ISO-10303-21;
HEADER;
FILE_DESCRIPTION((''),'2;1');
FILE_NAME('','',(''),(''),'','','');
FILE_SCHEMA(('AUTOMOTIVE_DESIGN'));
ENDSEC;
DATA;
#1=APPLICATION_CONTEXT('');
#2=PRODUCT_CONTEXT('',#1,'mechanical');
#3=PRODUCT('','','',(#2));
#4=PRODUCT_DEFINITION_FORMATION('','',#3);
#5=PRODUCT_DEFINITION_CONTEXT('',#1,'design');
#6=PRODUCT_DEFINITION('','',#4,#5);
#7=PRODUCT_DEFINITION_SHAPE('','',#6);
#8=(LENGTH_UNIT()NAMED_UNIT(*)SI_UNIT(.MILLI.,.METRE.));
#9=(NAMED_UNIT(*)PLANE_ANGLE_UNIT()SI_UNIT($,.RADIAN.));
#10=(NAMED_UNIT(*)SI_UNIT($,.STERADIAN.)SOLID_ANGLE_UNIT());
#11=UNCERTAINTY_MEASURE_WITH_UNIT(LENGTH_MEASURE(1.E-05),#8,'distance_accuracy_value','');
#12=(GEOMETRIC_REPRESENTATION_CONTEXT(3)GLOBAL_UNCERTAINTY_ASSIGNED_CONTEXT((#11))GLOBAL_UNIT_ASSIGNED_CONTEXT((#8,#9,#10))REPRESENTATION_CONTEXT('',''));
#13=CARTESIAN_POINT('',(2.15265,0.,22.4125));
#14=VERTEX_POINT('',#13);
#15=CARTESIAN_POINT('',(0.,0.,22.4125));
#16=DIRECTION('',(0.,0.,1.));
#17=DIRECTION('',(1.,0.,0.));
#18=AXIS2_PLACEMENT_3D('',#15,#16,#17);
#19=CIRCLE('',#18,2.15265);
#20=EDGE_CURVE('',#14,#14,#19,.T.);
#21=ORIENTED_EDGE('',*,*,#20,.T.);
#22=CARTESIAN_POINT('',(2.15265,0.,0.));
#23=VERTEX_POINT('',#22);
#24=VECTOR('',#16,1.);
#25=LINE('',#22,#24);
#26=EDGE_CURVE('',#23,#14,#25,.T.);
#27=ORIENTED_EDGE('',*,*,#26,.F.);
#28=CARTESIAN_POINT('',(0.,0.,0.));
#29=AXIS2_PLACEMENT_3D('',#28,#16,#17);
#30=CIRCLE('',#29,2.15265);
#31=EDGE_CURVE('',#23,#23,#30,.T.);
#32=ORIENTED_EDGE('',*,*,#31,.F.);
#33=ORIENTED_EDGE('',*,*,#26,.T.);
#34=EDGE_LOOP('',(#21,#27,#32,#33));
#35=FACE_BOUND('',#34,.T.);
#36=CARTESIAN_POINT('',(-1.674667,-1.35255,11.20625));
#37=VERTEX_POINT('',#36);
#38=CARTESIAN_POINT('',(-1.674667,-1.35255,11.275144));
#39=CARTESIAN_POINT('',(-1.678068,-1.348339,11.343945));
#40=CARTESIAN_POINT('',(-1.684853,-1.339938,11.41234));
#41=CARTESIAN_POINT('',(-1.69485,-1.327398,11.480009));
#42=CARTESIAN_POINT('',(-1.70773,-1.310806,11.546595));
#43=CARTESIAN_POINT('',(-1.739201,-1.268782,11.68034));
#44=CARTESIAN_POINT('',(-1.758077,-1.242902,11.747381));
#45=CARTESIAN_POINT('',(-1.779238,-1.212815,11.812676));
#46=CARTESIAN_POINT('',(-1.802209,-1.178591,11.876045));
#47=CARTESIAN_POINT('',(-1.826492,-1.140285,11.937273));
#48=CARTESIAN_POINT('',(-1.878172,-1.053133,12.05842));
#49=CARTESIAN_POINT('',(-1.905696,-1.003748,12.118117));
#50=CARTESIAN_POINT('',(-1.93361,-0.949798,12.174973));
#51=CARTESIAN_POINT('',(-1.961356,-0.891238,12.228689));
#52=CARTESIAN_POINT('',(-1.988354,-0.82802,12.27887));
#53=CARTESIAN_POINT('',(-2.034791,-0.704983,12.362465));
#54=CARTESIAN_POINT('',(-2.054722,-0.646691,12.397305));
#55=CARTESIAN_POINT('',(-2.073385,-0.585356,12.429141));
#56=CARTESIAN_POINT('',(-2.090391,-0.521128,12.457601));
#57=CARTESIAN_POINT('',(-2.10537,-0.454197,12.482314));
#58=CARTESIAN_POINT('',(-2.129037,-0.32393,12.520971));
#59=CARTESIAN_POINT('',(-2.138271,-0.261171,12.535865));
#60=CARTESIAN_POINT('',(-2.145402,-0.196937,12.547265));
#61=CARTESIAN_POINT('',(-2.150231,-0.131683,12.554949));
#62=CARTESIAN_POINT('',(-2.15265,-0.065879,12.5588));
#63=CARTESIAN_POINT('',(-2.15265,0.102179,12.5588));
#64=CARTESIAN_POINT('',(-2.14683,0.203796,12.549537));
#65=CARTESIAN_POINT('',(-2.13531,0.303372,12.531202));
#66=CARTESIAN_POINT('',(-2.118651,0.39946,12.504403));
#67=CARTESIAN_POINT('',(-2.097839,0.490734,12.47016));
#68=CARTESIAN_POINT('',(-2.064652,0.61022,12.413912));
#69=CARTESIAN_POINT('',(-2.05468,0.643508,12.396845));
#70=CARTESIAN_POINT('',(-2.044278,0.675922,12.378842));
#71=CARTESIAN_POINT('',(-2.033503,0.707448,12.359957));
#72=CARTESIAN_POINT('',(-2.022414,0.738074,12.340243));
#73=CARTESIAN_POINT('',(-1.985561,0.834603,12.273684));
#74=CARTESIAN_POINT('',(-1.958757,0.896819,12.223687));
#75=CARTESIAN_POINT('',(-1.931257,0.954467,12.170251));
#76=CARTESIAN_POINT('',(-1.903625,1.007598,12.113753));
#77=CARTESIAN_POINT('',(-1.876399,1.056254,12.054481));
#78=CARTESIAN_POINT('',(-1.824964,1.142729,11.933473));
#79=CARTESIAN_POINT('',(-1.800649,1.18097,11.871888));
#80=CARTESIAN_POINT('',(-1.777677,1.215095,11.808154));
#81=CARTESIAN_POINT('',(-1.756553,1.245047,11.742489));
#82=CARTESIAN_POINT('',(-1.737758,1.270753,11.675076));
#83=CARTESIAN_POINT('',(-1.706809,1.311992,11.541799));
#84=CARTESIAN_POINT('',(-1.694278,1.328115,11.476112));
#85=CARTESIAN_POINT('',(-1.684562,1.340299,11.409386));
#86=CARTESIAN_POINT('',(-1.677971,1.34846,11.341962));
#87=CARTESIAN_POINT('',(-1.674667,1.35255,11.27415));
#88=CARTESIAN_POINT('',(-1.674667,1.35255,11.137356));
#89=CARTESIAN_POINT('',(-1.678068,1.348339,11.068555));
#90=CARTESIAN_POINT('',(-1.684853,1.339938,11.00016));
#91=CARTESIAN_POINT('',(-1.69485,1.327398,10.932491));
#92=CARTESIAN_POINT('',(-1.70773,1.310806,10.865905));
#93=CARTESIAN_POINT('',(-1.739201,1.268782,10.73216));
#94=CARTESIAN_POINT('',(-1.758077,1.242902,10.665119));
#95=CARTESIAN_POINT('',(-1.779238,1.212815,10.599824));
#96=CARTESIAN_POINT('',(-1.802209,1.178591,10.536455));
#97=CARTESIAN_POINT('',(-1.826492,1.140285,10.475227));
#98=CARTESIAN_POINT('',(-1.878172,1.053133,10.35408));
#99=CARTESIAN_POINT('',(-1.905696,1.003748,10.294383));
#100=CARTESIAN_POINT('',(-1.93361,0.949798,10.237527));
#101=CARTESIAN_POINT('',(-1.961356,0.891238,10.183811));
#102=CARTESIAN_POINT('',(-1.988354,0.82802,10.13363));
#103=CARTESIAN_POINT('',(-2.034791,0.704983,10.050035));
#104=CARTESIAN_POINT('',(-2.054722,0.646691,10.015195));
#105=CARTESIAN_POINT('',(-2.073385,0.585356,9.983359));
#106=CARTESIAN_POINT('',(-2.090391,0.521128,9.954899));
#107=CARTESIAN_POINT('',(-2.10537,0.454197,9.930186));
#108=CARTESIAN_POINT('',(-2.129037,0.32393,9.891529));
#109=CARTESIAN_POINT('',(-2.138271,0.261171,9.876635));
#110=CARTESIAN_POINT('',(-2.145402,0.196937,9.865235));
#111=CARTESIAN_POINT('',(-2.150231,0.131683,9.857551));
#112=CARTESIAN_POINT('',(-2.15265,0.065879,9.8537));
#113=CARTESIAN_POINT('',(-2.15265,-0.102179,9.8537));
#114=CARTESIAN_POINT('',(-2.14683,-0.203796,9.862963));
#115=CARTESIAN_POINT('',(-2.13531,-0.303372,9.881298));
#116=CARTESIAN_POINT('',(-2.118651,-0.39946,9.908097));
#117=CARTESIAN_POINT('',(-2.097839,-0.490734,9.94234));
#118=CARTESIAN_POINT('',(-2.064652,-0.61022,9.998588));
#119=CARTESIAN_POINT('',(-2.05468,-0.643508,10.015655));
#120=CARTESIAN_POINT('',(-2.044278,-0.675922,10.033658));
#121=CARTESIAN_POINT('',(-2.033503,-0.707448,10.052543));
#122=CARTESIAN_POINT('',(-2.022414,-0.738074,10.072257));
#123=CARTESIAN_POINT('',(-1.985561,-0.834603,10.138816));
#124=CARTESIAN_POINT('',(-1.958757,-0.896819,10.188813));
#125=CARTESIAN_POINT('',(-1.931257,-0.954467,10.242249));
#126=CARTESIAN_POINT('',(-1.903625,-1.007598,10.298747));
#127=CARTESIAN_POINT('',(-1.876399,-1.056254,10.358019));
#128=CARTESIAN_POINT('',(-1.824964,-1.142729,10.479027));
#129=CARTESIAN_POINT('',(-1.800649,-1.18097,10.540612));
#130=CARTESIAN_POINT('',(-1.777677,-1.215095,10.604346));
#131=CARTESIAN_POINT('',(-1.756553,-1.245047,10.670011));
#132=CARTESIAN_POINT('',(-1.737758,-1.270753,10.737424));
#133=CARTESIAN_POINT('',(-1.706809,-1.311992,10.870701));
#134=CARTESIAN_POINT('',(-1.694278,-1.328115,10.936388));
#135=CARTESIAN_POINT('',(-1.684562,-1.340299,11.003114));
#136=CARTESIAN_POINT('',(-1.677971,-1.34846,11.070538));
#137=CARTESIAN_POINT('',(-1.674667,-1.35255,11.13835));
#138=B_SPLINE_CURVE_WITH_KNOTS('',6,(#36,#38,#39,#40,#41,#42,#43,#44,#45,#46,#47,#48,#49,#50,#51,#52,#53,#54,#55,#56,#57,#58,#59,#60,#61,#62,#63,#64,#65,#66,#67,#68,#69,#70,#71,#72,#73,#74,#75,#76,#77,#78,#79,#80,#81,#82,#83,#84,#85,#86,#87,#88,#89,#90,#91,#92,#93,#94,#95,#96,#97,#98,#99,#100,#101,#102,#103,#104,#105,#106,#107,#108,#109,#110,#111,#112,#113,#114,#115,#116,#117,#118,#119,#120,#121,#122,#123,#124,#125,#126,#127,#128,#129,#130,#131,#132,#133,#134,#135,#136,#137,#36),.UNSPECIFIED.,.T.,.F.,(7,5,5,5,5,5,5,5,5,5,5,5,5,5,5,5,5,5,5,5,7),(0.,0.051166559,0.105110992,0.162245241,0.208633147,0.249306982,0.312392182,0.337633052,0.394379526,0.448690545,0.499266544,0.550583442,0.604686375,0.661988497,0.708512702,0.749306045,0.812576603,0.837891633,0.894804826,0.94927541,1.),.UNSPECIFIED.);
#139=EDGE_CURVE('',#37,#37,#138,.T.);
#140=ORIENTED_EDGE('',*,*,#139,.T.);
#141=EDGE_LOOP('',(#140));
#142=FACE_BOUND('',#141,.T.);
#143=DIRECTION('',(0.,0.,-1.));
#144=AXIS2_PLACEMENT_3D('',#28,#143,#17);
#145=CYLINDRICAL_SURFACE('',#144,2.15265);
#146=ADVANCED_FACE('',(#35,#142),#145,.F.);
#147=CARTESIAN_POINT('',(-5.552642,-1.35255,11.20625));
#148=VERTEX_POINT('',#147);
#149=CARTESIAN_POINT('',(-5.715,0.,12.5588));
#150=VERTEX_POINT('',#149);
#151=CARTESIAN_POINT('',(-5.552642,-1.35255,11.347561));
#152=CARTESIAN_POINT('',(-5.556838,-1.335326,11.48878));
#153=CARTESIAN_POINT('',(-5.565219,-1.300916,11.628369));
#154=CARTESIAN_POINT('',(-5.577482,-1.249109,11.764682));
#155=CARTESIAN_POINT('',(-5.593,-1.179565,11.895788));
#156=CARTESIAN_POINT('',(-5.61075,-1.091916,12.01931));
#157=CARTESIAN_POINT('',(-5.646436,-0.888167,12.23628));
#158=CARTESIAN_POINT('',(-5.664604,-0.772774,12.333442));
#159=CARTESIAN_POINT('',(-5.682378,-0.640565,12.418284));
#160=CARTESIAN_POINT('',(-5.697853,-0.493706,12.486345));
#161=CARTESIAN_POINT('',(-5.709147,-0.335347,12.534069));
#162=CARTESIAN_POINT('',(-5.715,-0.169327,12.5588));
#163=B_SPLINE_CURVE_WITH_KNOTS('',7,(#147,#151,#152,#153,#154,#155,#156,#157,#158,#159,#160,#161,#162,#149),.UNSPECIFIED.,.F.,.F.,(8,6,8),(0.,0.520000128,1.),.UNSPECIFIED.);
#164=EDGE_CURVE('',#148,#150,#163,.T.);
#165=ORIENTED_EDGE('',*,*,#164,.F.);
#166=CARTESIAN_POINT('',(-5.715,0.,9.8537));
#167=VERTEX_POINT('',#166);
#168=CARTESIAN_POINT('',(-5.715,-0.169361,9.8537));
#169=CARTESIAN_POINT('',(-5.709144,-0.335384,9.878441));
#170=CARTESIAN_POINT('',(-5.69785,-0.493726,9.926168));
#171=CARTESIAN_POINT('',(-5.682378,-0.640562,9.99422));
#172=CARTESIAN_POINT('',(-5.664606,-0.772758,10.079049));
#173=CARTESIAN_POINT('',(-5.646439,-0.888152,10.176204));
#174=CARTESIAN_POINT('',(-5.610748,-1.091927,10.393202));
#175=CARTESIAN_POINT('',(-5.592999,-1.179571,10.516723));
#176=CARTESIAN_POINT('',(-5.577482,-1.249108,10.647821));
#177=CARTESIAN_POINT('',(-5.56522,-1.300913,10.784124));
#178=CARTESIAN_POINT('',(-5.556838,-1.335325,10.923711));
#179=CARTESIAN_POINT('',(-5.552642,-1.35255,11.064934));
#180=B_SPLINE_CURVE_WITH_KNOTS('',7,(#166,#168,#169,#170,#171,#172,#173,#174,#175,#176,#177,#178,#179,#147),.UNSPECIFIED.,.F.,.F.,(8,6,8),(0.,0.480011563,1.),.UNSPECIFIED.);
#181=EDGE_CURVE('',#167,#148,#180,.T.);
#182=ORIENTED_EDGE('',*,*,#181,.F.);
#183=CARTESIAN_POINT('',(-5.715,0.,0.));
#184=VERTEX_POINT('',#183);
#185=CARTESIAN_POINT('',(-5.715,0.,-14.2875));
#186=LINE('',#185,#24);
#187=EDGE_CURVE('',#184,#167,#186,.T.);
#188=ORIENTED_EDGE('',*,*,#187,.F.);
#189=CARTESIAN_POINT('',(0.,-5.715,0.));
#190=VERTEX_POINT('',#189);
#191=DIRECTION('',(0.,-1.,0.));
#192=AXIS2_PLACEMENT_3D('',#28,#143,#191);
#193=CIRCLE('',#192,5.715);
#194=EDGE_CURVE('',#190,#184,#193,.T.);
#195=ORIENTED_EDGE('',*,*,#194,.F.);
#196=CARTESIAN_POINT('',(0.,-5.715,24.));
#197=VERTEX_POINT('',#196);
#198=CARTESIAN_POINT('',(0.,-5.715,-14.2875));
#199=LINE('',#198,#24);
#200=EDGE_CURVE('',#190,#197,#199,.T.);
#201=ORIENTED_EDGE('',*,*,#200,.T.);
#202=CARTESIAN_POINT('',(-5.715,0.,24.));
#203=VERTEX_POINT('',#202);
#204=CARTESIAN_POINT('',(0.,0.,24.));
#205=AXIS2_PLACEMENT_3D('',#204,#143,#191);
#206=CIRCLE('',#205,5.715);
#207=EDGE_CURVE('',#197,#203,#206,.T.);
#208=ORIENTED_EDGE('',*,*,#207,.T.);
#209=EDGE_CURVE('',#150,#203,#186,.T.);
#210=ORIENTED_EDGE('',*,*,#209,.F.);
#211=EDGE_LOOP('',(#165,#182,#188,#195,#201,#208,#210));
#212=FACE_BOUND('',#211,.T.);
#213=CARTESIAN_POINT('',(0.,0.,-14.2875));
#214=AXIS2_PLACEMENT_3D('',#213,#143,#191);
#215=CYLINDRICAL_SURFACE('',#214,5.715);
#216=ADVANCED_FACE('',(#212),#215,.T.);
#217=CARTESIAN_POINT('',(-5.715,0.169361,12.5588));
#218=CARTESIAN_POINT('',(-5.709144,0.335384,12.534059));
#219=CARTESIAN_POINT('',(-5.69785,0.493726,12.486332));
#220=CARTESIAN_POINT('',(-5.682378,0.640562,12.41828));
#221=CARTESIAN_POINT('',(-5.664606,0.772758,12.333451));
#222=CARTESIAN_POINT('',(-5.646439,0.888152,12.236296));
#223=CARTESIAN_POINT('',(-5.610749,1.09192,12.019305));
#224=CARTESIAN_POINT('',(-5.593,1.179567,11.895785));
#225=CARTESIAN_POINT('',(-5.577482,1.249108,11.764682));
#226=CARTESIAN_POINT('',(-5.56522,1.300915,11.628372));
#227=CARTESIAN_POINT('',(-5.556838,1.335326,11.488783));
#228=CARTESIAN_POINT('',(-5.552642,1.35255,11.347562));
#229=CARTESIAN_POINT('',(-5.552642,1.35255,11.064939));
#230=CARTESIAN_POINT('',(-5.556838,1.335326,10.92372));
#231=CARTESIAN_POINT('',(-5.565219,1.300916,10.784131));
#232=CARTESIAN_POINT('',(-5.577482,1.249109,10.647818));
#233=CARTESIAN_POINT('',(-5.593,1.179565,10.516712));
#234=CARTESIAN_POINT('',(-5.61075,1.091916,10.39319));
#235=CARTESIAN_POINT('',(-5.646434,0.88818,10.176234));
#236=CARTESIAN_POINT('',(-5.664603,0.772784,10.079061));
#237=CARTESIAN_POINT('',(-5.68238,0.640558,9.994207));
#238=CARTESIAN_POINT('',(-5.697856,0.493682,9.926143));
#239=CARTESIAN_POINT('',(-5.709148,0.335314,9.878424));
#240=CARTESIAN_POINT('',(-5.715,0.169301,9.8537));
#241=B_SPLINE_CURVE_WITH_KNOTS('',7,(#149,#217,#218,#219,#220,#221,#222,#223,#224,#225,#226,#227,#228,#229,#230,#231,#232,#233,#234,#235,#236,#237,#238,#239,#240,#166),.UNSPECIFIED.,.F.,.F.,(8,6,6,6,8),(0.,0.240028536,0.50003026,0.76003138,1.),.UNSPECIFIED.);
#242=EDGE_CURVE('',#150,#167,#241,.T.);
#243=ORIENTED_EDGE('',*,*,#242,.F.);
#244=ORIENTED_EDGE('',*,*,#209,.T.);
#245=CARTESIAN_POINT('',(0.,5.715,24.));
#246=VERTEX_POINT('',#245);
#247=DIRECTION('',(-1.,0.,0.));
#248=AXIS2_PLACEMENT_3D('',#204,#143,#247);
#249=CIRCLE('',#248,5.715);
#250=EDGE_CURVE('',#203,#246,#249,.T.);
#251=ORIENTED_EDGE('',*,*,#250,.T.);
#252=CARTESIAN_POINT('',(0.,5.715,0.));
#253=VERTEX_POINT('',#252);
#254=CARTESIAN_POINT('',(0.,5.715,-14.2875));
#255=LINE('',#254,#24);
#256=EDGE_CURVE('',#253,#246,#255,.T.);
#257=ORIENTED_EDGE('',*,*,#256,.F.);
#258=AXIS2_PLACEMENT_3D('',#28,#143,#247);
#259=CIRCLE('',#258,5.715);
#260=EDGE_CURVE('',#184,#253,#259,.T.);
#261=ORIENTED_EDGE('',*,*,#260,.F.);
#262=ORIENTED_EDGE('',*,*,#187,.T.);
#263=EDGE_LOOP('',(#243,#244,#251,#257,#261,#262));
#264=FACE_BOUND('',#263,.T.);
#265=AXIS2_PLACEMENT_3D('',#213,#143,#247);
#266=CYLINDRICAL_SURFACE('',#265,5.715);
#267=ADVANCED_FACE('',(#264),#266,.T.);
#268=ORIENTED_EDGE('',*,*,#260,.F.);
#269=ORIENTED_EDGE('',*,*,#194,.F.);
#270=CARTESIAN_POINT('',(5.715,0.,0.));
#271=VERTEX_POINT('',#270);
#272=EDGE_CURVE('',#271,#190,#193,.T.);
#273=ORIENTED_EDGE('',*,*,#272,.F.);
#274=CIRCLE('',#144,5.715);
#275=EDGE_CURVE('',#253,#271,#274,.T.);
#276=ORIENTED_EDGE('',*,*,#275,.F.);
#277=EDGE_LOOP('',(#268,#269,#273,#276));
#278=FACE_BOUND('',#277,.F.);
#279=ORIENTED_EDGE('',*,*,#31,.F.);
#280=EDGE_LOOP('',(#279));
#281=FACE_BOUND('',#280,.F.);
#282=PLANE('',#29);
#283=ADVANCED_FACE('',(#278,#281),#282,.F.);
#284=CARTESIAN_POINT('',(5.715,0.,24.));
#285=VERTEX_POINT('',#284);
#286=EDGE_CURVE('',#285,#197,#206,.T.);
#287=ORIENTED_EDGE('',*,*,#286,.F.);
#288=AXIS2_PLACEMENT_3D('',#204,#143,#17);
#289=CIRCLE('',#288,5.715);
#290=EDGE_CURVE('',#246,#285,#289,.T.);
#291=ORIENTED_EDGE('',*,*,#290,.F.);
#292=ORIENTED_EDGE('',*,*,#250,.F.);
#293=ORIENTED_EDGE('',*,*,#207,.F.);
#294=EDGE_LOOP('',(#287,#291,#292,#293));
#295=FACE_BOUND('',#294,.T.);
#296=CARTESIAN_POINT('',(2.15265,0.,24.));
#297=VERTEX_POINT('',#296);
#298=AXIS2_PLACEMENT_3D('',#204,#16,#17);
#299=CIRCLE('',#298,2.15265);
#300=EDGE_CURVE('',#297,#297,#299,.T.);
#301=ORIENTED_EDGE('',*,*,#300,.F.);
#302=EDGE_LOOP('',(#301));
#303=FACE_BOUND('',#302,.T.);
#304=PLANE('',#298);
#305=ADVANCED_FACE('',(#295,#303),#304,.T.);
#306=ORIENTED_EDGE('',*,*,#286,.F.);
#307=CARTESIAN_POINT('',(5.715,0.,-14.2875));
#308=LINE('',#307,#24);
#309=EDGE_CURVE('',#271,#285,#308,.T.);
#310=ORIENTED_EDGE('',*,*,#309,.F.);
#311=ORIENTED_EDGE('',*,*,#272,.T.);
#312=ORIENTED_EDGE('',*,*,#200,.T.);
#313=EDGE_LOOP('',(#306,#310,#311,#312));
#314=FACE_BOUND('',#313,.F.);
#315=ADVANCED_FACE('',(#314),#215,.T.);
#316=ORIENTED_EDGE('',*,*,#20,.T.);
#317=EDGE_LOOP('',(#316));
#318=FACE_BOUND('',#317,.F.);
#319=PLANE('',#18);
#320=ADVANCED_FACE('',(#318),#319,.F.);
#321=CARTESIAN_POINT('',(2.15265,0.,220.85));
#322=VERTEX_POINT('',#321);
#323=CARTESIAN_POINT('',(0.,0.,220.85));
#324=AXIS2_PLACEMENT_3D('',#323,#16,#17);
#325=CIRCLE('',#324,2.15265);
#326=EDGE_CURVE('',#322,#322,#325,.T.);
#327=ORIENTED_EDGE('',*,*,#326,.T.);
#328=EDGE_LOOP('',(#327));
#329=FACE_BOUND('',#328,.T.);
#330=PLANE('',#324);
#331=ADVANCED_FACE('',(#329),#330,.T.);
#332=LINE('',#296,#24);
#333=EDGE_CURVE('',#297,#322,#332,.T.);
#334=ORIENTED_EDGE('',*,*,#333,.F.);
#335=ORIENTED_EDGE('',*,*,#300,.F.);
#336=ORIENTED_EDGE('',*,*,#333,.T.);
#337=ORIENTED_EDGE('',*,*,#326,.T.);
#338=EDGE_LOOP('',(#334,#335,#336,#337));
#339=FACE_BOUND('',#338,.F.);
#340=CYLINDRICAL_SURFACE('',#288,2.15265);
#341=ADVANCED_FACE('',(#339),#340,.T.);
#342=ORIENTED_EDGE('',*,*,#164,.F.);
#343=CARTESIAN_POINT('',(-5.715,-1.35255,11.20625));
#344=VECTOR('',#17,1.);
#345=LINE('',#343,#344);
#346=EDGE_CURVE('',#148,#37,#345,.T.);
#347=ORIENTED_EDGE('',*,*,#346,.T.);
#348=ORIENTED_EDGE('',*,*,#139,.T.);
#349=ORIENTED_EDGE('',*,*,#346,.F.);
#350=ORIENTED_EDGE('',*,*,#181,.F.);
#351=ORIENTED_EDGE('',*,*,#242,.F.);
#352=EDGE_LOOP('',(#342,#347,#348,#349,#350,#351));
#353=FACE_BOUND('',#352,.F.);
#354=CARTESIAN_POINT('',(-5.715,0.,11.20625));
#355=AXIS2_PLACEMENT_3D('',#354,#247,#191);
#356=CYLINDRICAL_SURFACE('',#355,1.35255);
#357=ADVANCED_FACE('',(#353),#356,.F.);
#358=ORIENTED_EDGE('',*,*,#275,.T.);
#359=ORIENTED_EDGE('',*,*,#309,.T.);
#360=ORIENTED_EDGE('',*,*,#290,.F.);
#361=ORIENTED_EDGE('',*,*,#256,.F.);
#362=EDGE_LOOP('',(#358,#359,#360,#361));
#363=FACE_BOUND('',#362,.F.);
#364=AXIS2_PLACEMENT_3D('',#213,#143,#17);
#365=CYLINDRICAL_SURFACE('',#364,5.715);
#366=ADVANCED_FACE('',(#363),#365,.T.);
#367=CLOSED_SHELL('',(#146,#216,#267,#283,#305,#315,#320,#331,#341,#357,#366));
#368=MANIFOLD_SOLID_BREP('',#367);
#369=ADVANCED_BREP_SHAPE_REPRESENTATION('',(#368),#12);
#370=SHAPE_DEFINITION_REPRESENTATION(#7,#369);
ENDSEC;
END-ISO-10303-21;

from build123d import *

# Parameters (mm, degrees)
F0_W        = 11.43
F0_H        = 11.43
F0_R        = 2.15265
F1_DEPTH    = 22.4125
F2_W        = 11.43
F2_H        = 11.43
F3_DEPTH    = 1.5875
F4_R        = 1.35255
F5_REACH    = 15.2565891076
F6_T1_DEPTH = 52.575
F7_R        = 2.15265
F8_DEPTH    = 196.85


# Not quite as in the source:
# - a fillet or chamfer that OpenCascade refuses, or shapes differently, is made with other operations: its cross-section is extruded or revolved along the edge and cut away or added


with BuildPart() as f1:
    # F0 (on Top) → F1 (new body)
    with BuildSketch(Plane.XY):
        Rectangle(F0_W, F0_H)
        Circle(F0_R, mode=Mode.SUBTRACT)
    extrude(amount=F1_DEPTH)

    # F2 (on face) → F3 (join)
    with BuildSketch(Plane.XY.offset(22.4125)):
        Rectangle(F2_W, F2_H)
    extrude(amount=F3_DEPTH)

    f5_end = f1.faces().sort_by_distance((-2.15265, 0, 11.20625))[0]
    # F4 (on face) → F5 (cut, up to a face of the model that its end follows)
    with BuildSketch(Plane(origin=(-5.715, 0, 0), x_dir=(0, -1, 0), z_dir=(-1, 0, 0))):
        with Locations((0, 11.20625)):
            Circle(F4_R)
    f5_long = extrude(amount=-F5_REACH, mode=Mode.PRIVATE)
    add(split(f5_long, bisect_by=f5_end, keep=Keep.ALL, mode=Mode.PRIVATE).solids().sort_by_distance((-5.715, 0, 11.20625))[0], mode=Mode.SUBTRACT)

    # F6: fillet of radius 5.715 on 4 edges, made by hand

    # F6_s2 → F6_t1 (cut)
    with BuildSketch(Plane.XY.offset(-14.2875)):
        with BuildLine():
            ThreePointArc((0, -5.715), (-4.0411152545, -4.0411152545), (-5.715, 0))
            Line((-5.715, 0), (-5.715, -5.715))
            Line((-5.715, -5.715), (0, -5.715))
        make_face()
        with BuildLine():
            ThreePointArc((0, -5.715), (4.0411152545, -4.0411152545), (5.715, 0))
            Line((5.715, 0), (5.715, -5.715))
            Line((5.715, -5.715), (0, -5.715))
        make_face()
        with BuildLine():
            ThreePointArc((-5.715, 0), (-4.0411152545, 4.0411152545), (0, 5.715))
            Line((0, 5.715), (-5.715, 5.715))
            Line((-5.715, 5.715), (-5.715, 0))
        make_face()
        with BuildLine():
            ThreePointArc((5.715, 0), (4.0411152545, 4.0411152545), (0, 5.715))
            Line((0, 5.715), (5.715, 5.715))
            Line((5.715, 5.715), (5.715, 0))
        make_face()
    extrude(amount=F6_T1_DEPTH, mode=Mode.SUBTRACT)

    # F7 (on face) → F8 (join)
    with BuildSketch(Plane.XY.offset(24)):
        Circle(F7_R)
    extrude(amount=F8_DEPTH)


solid = f1.part
